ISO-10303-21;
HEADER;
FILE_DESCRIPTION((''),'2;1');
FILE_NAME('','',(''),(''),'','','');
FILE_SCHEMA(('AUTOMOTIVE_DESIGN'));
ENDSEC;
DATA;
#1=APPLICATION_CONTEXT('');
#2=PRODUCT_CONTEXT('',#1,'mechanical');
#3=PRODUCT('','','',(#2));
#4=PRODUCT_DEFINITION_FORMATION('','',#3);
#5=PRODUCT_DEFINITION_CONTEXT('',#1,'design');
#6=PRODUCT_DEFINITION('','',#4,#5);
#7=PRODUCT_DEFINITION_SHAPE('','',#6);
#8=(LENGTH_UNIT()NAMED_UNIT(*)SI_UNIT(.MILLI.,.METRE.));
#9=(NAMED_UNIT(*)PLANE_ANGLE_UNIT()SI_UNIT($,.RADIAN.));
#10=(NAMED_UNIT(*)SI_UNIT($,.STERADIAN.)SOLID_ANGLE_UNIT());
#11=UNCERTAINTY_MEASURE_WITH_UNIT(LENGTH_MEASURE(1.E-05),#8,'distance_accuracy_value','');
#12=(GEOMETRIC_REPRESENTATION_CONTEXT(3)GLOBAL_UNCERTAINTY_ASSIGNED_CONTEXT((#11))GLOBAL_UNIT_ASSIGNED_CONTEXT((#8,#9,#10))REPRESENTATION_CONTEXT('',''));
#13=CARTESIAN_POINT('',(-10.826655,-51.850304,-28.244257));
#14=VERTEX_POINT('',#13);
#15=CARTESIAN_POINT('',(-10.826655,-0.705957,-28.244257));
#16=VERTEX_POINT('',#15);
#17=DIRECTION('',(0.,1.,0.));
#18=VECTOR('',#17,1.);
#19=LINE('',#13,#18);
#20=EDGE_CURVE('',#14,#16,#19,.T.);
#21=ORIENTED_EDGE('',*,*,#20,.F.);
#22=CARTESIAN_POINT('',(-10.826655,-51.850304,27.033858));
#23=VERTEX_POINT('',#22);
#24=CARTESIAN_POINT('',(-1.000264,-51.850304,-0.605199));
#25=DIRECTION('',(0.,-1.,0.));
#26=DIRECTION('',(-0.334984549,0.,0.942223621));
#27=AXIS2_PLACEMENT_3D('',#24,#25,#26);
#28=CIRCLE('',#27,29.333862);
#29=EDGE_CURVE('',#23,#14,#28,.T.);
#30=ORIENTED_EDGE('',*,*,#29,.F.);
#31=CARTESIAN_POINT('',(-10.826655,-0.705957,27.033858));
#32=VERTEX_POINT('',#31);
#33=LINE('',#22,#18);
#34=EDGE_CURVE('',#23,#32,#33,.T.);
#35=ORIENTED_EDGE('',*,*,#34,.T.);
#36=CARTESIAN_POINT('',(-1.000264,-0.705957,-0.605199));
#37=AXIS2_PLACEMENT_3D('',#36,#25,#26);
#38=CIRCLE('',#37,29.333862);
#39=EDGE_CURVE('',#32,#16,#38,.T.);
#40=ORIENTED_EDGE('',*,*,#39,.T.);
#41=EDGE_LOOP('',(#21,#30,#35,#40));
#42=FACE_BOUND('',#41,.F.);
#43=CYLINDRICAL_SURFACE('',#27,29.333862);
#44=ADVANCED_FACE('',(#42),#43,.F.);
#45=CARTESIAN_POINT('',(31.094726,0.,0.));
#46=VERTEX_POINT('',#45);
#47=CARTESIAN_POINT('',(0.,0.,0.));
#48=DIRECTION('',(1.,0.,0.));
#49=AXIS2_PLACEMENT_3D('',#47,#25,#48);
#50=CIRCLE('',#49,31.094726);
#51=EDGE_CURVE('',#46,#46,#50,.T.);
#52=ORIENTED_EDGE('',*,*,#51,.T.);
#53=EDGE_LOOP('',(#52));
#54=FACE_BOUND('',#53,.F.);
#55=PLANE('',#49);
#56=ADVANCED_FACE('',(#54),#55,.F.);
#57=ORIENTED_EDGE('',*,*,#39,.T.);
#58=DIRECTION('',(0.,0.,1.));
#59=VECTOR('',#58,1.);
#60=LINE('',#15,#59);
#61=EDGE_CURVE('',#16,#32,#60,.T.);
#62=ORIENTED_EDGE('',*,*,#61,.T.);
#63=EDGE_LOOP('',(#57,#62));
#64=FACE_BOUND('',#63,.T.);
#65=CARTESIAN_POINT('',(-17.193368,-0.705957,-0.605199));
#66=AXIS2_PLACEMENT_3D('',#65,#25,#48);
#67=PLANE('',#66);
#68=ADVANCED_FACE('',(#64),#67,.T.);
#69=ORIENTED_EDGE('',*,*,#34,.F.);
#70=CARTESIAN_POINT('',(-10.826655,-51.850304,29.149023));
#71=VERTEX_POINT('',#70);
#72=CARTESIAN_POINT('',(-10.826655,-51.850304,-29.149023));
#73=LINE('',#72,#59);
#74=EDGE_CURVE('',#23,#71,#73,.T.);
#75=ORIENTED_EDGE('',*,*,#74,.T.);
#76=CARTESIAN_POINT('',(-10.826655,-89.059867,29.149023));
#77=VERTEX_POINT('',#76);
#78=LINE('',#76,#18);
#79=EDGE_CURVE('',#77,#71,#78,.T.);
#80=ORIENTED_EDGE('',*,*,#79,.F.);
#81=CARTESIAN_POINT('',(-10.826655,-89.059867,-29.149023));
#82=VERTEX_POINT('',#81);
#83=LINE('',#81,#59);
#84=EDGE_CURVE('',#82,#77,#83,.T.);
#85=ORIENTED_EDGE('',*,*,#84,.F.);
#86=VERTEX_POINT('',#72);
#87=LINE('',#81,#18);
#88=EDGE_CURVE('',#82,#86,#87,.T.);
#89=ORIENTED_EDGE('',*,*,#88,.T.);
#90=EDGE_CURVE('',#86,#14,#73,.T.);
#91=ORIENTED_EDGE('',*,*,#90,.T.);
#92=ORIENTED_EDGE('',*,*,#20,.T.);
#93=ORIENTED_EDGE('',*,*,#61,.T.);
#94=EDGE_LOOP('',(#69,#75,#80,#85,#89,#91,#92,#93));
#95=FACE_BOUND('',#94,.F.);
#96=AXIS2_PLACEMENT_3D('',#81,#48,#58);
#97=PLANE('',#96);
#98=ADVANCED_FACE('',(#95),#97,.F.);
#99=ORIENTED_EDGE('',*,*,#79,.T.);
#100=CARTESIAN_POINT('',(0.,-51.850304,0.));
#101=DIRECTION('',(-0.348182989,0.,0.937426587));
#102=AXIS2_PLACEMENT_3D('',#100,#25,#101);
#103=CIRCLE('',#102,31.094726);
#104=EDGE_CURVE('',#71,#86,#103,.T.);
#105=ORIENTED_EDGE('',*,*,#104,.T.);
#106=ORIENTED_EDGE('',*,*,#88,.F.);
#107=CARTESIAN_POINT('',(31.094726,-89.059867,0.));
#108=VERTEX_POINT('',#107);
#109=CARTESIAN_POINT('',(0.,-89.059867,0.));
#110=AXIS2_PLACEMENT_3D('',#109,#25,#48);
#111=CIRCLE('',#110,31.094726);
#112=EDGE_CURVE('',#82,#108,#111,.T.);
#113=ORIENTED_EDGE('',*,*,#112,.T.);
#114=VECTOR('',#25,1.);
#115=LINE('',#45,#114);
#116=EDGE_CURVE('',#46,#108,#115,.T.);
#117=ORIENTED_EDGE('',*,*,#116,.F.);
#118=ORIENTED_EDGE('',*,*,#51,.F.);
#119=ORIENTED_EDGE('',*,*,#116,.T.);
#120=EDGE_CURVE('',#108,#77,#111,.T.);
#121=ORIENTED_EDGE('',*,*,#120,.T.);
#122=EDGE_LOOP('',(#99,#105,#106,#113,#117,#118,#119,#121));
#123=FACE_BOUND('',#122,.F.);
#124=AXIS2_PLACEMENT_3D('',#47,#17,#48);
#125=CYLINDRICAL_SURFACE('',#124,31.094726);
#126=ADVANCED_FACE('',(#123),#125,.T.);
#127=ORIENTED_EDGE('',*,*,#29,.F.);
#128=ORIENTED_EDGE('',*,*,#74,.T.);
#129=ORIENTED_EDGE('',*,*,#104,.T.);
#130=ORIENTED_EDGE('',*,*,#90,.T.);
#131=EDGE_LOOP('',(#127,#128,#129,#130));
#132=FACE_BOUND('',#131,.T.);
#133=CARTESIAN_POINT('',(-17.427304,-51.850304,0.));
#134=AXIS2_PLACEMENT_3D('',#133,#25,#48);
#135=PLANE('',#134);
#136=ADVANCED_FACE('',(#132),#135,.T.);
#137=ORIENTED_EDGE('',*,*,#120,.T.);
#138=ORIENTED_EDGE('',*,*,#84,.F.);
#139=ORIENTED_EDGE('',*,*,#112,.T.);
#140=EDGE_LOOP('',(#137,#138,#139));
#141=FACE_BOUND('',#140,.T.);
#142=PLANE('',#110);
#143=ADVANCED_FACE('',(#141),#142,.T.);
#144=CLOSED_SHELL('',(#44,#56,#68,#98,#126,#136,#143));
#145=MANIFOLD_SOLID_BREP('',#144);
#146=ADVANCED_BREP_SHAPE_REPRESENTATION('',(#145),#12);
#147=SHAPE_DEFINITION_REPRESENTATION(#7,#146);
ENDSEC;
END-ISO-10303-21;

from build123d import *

# Parameters (mm, degrees)
F0_R     = 31.0947263036
F1_DEPTH = 89.0598669648
F3_DEPTH = 37.2095629573
F5_DEPTH = 51.1443465948


with BuildPart() as f1:
    # F0 (on Front) → F1 (new body)
    with BuildSketch(Plane.XZ):
        Circle(F0_R)
    extrude(amount=F1_DEPTH)

    # F2 (on face) → F3 (cut)
    with BuildSketch(Plane.XZ.offset(89.0598669648)):
        with BuildLine():
            Line((-10.8266547322, -29.1490231604), (-10.8266547322, 0))
            Line((-10.8266547322, 0), (-10.8266547322, 29.1490231604))
            ThreePointArc((-10.8266547322, 29.1490231604), (-31.0947263036, 0), (-10.8266547322, -29.1490231604))
        make_face()
    extrude(amount=-F3_DEPTH, mode=Mode.SUBTRACT)

    # F4 (on face) → F5 (cut)
    with BuildSketch(Plane.XZ.offset(51.8503040075)):
        with BuildLine():
            Line((-10.8266547322, -28.2442569733), (-10.8266547322, 27.0338580012))
            ThreePointArc((-10.8266547322, 27.0338580012), (-30.3341260618, -0.605199486), (-10.8266547322, -28.2442569733))
        make_face()
    extrude(amount=-F5_DEPTH, mode=Mode.SUBTRACT)


solid = f1.part
